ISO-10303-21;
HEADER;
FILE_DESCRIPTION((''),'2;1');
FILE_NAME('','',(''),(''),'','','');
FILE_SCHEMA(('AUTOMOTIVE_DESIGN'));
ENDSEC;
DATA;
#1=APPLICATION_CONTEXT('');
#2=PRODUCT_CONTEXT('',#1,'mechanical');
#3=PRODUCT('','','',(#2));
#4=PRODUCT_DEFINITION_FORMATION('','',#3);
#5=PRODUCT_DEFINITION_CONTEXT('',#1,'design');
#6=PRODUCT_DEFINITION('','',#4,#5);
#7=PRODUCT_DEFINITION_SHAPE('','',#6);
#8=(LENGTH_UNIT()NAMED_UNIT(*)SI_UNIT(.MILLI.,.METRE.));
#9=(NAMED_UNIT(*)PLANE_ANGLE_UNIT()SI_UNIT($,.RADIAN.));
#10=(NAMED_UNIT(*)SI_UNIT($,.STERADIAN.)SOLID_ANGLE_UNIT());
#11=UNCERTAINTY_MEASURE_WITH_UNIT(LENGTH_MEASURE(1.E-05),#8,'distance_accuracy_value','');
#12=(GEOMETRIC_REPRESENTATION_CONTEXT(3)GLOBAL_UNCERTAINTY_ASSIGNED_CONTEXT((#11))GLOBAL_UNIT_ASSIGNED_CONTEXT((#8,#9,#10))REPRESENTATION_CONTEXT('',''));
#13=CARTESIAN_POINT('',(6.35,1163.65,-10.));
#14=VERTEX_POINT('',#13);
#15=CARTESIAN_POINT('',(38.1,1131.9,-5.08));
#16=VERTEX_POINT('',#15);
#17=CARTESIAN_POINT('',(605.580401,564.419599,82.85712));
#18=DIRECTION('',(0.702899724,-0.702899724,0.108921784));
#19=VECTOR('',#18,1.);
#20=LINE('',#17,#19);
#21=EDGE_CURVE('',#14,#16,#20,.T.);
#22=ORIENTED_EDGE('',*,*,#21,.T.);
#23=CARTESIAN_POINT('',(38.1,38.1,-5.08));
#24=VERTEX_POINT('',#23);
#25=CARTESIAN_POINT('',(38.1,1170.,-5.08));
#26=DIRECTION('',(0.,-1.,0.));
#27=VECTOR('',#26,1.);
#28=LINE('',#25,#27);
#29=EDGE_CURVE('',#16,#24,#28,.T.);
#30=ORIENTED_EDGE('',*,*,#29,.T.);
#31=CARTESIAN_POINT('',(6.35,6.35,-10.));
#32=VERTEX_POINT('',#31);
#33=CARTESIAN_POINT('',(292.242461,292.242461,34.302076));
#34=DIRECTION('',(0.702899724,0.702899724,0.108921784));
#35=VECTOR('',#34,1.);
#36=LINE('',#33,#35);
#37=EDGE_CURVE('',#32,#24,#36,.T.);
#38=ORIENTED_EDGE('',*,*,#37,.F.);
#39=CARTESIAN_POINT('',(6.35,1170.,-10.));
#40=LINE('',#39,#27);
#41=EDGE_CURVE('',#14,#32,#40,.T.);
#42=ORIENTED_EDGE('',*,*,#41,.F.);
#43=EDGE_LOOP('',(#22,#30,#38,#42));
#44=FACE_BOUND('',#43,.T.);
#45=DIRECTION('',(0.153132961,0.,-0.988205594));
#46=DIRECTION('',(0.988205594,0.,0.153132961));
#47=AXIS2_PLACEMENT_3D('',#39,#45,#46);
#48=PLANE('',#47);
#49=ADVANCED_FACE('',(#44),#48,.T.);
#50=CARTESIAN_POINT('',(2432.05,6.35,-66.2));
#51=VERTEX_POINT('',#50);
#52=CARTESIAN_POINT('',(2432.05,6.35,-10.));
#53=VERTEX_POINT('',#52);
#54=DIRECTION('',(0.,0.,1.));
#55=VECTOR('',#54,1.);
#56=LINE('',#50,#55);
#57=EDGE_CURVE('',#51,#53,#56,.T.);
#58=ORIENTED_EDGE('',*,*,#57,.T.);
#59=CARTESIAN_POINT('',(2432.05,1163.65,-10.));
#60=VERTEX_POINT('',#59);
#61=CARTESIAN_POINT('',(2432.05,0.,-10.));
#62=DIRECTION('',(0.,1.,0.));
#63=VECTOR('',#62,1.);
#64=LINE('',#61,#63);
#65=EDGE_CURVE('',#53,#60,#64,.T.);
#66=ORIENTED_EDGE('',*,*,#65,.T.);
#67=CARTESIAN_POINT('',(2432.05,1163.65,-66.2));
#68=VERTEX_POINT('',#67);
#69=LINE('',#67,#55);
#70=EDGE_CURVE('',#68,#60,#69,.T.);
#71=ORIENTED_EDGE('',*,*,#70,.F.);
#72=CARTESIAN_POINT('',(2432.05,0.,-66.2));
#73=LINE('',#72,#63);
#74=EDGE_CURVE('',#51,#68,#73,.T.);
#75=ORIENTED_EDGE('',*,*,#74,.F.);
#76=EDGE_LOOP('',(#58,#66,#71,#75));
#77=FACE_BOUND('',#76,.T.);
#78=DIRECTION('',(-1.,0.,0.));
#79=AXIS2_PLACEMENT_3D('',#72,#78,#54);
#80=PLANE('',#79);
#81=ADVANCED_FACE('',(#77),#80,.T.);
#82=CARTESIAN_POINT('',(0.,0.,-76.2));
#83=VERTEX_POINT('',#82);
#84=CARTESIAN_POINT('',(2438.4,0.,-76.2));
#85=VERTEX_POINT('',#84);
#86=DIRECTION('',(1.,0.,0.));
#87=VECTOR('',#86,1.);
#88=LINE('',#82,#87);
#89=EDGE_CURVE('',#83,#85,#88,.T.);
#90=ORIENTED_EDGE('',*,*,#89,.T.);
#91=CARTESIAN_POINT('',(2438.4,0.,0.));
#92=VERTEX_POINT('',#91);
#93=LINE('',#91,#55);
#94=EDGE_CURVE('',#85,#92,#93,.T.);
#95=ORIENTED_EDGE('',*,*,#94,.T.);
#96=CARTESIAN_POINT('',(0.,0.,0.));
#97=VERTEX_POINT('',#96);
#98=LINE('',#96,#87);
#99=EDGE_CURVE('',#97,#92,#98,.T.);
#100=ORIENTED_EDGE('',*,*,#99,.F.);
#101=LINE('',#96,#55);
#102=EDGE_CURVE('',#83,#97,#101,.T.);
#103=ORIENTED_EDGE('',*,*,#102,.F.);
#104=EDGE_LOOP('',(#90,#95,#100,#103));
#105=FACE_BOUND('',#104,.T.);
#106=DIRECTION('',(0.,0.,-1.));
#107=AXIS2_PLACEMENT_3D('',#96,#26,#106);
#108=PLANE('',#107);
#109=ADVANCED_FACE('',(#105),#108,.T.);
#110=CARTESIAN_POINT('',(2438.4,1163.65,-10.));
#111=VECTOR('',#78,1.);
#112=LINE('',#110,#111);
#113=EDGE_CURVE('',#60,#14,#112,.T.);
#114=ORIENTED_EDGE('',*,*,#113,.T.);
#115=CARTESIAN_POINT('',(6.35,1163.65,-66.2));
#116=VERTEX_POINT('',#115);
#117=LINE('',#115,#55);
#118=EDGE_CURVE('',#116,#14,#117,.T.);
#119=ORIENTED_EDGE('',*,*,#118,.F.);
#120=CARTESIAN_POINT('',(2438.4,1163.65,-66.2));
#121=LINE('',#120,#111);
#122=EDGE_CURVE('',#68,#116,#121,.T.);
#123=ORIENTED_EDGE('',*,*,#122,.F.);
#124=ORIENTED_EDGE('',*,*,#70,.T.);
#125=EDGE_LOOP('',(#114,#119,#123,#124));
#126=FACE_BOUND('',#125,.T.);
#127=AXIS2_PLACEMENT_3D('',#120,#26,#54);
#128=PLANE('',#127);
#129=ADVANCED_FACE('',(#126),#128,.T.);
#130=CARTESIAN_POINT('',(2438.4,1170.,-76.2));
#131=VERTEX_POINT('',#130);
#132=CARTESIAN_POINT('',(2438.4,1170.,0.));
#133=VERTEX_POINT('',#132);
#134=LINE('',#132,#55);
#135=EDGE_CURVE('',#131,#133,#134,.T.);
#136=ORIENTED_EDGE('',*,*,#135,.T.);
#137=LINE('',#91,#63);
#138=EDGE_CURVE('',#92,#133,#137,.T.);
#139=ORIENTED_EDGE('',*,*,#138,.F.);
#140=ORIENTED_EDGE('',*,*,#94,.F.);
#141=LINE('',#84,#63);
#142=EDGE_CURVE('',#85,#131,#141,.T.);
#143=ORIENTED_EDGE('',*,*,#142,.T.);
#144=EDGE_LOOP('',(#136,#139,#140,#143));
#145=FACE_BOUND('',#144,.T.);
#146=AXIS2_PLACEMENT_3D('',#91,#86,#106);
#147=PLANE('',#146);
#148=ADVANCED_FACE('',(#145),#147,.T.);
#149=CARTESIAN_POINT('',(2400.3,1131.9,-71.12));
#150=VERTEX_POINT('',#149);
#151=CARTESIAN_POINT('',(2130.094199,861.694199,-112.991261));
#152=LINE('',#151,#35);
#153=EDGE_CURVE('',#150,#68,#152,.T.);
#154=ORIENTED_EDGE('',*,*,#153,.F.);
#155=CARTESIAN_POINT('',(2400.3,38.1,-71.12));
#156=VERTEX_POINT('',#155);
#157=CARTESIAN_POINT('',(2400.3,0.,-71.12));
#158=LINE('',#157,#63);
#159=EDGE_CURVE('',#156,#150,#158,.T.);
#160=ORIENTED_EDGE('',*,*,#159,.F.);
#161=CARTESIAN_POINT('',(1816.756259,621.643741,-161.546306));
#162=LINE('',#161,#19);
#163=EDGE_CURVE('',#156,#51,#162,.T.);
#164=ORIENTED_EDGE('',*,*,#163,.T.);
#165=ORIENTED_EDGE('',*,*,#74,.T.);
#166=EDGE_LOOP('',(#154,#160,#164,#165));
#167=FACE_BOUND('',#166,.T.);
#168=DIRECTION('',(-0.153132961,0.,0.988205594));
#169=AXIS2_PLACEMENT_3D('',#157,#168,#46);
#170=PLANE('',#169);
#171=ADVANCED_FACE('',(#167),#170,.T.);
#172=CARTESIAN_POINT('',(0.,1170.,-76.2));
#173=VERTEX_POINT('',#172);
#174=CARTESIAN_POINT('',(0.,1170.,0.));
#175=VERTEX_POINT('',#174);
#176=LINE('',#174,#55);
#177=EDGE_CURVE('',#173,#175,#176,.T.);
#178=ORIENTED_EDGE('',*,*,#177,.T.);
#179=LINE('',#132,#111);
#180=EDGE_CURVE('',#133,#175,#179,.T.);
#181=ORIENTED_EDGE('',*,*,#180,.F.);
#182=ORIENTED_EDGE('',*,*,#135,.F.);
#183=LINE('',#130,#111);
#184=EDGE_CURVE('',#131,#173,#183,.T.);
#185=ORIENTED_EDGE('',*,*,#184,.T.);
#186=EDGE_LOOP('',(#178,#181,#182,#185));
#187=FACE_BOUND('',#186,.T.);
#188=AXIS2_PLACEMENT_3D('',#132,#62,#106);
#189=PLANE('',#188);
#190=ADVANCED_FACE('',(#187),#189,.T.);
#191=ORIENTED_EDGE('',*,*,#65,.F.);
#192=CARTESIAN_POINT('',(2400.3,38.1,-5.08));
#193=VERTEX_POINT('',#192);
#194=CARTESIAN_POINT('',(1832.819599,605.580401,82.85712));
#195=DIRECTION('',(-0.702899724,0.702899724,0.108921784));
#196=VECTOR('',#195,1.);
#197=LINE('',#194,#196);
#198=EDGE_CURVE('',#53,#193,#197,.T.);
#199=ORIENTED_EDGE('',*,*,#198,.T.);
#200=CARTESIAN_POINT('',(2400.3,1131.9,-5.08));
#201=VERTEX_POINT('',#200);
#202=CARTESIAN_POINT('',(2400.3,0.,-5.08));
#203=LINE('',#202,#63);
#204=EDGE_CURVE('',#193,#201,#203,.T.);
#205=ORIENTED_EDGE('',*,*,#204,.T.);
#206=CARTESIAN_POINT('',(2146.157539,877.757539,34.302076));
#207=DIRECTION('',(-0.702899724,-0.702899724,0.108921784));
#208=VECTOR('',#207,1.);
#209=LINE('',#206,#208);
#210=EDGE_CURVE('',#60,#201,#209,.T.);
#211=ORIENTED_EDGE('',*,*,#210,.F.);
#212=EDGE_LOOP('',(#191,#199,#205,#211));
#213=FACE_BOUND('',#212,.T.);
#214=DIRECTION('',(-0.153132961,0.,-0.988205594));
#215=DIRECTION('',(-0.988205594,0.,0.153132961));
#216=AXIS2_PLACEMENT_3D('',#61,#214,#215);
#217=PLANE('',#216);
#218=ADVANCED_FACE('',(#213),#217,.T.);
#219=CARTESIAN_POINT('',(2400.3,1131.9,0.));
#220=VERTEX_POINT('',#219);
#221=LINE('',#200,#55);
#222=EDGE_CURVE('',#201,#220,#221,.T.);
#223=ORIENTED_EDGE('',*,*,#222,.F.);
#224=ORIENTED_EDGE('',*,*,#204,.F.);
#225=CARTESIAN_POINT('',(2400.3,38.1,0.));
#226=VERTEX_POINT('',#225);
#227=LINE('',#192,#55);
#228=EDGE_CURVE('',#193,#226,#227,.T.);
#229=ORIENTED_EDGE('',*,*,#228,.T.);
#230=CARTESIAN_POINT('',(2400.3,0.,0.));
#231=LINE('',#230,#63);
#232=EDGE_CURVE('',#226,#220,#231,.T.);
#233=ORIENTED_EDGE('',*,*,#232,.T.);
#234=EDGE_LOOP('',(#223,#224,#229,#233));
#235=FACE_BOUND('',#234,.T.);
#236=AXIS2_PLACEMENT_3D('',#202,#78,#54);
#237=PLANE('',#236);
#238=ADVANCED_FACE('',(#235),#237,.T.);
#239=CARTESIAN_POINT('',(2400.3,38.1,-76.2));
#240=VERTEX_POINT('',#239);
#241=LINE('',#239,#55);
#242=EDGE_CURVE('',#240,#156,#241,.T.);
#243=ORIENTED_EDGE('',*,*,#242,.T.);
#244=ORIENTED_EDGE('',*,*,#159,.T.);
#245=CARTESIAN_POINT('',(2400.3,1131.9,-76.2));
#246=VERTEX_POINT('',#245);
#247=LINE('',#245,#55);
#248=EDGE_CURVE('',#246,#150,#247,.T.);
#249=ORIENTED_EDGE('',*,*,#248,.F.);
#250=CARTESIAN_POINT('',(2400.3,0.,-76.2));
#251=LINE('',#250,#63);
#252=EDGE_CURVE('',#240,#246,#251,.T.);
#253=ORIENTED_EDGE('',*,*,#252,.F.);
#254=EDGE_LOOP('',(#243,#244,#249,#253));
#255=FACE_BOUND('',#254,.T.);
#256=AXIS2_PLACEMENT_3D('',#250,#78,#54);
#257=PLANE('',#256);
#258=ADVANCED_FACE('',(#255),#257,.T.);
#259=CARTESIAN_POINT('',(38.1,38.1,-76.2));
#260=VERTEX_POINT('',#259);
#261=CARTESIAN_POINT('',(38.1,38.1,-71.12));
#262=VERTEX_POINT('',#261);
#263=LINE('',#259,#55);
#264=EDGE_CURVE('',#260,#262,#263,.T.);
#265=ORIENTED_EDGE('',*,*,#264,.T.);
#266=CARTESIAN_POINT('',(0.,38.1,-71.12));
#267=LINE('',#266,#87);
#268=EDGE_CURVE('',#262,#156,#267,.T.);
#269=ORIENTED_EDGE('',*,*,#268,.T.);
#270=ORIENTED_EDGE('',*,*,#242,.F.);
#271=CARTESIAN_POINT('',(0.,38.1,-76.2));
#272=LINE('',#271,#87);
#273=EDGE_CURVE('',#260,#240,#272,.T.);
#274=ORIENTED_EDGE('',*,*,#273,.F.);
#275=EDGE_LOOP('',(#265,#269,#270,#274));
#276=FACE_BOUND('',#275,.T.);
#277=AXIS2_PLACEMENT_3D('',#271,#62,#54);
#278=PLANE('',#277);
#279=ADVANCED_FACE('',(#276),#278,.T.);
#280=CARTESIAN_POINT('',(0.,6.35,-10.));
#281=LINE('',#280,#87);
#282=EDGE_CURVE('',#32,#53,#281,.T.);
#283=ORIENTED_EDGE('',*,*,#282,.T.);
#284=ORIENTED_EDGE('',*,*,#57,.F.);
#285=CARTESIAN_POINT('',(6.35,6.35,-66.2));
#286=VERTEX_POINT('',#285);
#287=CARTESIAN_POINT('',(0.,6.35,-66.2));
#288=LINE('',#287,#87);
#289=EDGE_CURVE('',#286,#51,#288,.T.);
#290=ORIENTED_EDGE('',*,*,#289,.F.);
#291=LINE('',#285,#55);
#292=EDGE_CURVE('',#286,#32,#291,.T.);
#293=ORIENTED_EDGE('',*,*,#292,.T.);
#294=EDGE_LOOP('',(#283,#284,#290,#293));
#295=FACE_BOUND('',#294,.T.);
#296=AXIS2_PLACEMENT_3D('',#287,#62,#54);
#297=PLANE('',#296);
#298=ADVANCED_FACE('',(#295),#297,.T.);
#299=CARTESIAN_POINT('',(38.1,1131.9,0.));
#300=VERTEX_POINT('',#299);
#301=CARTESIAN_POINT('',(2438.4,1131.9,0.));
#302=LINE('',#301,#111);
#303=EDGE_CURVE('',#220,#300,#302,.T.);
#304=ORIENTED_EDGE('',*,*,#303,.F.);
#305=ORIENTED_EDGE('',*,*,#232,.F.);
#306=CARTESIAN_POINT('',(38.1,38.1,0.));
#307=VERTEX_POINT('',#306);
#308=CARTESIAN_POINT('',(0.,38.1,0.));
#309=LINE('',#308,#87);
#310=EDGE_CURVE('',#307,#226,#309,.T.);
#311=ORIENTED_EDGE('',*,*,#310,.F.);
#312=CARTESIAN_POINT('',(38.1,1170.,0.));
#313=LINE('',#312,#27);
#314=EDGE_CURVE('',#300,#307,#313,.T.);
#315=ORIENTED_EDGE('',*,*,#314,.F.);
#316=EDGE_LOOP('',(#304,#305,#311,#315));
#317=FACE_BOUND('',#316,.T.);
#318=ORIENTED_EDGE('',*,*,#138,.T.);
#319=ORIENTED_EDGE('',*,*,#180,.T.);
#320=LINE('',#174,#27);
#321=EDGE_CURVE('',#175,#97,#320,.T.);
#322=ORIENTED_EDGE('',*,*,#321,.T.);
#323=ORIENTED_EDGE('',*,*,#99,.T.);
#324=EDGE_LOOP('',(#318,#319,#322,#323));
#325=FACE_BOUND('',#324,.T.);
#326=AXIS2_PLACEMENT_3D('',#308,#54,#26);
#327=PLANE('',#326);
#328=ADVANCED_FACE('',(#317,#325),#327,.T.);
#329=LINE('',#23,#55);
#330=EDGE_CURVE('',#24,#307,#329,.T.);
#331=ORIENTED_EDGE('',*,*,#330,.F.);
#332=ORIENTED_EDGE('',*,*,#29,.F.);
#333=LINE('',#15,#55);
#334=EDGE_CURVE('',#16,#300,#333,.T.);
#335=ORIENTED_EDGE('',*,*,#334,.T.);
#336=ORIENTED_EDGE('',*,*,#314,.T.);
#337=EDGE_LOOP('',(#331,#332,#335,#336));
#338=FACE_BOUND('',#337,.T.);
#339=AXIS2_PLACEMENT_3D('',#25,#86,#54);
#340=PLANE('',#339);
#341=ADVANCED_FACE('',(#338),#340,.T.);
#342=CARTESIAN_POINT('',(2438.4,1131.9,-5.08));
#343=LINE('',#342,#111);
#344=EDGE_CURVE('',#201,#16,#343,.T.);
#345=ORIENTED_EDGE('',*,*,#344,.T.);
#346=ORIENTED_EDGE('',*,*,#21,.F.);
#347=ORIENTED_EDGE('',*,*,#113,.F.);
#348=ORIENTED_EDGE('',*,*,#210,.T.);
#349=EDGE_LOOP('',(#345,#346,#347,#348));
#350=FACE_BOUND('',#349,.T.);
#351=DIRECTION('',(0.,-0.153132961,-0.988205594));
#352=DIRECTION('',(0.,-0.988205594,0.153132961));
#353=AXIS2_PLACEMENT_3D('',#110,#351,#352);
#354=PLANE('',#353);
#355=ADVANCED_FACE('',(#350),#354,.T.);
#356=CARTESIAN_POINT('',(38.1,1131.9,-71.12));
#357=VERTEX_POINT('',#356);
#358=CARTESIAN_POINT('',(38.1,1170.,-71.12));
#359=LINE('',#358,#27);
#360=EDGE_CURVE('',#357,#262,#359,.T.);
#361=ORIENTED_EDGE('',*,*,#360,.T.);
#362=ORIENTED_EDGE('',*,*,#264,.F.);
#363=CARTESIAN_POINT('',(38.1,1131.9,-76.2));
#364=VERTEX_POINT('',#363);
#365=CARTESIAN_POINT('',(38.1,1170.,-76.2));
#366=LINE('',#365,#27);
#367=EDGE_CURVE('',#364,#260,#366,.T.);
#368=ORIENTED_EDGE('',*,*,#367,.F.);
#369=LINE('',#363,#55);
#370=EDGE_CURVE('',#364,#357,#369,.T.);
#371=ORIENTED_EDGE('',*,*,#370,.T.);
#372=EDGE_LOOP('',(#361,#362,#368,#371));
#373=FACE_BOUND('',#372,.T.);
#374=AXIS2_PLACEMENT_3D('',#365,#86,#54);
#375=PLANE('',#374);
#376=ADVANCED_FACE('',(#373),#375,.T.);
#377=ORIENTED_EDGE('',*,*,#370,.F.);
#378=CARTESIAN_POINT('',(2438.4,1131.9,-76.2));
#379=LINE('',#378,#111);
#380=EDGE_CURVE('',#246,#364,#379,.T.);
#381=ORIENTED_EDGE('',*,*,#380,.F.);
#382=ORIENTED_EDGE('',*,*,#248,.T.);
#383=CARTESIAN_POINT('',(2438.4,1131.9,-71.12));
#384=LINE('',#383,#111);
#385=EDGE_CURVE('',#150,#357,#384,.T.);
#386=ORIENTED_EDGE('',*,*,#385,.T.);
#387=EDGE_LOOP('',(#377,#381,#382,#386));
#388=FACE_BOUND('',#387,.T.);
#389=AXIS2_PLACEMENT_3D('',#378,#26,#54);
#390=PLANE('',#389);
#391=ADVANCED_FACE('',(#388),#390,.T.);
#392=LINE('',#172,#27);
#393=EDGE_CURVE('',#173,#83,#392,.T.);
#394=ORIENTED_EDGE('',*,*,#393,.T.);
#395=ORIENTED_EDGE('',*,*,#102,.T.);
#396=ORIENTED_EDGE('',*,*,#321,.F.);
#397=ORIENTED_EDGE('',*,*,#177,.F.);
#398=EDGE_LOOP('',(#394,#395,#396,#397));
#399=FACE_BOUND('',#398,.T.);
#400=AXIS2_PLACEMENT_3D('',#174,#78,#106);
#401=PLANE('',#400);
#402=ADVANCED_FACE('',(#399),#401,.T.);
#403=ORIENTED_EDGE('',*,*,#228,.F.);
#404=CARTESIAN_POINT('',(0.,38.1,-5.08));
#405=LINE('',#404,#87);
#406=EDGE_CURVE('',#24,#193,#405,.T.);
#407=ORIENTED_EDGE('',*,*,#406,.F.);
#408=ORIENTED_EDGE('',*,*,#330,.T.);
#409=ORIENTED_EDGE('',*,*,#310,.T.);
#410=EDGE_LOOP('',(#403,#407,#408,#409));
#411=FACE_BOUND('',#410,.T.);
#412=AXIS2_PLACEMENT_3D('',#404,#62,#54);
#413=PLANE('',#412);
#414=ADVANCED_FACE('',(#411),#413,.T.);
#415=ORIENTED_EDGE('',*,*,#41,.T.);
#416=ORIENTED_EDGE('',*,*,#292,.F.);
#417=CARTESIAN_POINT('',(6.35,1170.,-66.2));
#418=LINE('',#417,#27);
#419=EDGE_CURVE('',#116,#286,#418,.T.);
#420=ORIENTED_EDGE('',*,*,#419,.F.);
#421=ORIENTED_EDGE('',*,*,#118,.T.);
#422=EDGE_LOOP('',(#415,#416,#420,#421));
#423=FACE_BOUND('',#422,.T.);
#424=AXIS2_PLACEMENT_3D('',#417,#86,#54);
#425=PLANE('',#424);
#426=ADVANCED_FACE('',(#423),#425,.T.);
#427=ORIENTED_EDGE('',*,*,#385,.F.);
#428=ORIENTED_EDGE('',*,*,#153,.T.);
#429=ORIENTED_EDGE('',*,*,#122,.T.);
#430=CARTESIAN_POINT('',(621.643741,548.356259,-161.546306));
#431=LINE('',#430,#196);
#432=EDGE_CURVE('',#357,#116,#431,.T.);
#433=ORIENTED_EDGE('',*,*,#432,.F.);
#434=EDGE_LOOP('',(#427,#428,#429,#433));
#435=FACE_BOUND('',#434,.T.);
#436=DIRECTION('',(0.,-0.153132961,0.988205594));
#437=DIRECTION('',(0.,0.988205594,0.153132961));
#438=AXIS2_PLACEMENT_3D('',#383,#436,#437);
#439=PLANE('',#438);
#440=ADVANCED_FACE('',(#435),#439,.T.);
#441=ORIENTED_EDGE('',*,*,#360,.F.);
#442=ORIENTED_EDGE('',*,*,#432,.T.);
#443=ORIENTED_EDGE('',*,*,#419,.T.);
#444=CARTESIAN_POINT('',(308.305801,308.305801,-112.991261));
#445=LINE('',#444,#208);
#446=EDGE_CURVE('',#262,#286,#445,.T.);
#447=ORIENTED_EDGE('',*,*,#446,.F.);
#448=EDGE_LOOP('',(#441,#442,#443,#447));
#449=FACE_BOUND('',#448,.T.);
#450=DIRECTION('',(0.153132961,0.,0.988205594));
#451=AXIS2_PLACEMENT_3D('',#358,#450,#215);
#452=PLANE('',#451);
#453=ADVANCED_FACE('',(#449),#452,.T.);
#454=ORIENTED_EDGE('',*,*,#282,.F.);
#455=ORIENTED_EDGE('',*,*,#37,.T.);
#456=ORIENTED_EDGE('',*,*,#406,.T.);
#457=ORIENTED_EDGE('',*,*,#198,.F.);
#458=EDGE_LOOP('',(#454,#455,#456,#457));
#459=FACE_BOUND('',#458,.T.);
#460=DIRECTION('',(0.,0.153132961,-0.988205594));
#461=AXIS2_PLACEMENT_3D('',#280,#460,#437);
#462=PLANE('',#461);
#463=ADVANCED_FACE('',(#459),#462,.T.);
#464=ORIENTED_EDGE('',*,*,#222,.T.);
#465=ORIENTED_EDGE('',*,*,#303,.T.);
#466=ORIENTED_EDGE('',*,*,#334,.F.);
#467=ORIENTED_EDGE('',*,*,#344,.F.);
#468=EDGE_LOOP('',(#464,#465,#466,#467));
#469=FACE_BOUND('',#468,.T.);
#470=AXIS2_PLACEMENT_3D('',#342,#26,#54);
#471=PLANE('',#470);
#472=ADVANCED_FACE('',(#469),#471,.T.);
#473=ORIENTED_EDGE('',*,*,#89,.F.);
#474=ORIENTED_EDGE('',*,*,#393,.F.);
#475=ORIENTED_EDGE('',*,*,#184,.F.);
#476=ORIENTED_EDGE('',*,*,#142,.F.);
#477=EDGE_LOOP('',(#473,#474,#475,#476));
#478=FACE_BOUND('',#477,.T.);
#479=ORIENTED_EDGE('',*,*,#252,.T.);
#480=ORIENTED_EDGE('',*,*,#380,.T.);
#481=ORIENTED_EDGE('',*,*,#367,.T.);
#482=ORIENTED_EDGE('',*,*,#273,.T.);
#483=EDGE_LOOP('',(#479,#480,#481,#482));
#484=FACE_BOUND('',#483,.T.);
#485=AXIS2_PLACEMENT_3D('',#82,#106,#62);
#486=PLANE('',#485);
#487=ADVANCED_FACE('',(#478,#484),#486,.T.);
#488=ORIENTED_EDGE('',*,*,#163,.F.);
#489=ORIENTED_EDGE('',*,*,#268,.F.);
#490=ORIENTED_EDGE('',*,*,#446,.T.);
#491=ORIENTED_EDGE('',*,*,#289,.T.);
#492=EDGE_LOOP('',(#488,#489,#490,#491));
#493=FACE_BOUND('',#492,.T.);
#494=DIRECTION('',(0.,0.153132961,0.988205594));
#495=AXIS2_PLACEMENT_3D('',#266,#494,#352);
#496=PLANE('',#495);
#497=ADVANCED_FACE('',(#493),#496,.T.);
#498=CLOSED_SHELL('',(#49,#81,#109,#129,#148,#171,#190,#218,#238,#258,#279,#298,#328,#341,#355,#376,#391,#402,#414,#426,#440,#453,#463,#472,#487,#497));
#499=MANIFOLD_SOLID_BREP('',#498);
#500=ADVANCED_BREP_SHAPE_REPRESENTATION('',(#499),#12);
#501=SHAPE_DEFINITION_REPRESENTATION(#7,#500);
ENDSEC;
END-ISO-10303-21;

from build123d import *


with BuildPart() as f2:
    # F2: sweep along a path in F0
    with BuildLine(Plane.XY) as f2_path:
        Line((0, 0), (2438.4, 0))
        Line((2438.4, 0), (2438.4, 1170))
        Line((2438.4, 1170), (0, 1170))
        Line((0, 1170), (0, 0))
    # F1 (on Right) → F2 (sweep)
    with BuildSketch(Plane.YZ):
        Polygon((38.1, 0), (0, 0), (0, -76.2), (38.1, -76.2), (38.1, -71.12), (6.35, -66.2), (6.35, -10), (38.1, -5.08), align=None)
    sweep(path=f2_path.line, transition=Transition.RIGHT)


solid = f2.part
